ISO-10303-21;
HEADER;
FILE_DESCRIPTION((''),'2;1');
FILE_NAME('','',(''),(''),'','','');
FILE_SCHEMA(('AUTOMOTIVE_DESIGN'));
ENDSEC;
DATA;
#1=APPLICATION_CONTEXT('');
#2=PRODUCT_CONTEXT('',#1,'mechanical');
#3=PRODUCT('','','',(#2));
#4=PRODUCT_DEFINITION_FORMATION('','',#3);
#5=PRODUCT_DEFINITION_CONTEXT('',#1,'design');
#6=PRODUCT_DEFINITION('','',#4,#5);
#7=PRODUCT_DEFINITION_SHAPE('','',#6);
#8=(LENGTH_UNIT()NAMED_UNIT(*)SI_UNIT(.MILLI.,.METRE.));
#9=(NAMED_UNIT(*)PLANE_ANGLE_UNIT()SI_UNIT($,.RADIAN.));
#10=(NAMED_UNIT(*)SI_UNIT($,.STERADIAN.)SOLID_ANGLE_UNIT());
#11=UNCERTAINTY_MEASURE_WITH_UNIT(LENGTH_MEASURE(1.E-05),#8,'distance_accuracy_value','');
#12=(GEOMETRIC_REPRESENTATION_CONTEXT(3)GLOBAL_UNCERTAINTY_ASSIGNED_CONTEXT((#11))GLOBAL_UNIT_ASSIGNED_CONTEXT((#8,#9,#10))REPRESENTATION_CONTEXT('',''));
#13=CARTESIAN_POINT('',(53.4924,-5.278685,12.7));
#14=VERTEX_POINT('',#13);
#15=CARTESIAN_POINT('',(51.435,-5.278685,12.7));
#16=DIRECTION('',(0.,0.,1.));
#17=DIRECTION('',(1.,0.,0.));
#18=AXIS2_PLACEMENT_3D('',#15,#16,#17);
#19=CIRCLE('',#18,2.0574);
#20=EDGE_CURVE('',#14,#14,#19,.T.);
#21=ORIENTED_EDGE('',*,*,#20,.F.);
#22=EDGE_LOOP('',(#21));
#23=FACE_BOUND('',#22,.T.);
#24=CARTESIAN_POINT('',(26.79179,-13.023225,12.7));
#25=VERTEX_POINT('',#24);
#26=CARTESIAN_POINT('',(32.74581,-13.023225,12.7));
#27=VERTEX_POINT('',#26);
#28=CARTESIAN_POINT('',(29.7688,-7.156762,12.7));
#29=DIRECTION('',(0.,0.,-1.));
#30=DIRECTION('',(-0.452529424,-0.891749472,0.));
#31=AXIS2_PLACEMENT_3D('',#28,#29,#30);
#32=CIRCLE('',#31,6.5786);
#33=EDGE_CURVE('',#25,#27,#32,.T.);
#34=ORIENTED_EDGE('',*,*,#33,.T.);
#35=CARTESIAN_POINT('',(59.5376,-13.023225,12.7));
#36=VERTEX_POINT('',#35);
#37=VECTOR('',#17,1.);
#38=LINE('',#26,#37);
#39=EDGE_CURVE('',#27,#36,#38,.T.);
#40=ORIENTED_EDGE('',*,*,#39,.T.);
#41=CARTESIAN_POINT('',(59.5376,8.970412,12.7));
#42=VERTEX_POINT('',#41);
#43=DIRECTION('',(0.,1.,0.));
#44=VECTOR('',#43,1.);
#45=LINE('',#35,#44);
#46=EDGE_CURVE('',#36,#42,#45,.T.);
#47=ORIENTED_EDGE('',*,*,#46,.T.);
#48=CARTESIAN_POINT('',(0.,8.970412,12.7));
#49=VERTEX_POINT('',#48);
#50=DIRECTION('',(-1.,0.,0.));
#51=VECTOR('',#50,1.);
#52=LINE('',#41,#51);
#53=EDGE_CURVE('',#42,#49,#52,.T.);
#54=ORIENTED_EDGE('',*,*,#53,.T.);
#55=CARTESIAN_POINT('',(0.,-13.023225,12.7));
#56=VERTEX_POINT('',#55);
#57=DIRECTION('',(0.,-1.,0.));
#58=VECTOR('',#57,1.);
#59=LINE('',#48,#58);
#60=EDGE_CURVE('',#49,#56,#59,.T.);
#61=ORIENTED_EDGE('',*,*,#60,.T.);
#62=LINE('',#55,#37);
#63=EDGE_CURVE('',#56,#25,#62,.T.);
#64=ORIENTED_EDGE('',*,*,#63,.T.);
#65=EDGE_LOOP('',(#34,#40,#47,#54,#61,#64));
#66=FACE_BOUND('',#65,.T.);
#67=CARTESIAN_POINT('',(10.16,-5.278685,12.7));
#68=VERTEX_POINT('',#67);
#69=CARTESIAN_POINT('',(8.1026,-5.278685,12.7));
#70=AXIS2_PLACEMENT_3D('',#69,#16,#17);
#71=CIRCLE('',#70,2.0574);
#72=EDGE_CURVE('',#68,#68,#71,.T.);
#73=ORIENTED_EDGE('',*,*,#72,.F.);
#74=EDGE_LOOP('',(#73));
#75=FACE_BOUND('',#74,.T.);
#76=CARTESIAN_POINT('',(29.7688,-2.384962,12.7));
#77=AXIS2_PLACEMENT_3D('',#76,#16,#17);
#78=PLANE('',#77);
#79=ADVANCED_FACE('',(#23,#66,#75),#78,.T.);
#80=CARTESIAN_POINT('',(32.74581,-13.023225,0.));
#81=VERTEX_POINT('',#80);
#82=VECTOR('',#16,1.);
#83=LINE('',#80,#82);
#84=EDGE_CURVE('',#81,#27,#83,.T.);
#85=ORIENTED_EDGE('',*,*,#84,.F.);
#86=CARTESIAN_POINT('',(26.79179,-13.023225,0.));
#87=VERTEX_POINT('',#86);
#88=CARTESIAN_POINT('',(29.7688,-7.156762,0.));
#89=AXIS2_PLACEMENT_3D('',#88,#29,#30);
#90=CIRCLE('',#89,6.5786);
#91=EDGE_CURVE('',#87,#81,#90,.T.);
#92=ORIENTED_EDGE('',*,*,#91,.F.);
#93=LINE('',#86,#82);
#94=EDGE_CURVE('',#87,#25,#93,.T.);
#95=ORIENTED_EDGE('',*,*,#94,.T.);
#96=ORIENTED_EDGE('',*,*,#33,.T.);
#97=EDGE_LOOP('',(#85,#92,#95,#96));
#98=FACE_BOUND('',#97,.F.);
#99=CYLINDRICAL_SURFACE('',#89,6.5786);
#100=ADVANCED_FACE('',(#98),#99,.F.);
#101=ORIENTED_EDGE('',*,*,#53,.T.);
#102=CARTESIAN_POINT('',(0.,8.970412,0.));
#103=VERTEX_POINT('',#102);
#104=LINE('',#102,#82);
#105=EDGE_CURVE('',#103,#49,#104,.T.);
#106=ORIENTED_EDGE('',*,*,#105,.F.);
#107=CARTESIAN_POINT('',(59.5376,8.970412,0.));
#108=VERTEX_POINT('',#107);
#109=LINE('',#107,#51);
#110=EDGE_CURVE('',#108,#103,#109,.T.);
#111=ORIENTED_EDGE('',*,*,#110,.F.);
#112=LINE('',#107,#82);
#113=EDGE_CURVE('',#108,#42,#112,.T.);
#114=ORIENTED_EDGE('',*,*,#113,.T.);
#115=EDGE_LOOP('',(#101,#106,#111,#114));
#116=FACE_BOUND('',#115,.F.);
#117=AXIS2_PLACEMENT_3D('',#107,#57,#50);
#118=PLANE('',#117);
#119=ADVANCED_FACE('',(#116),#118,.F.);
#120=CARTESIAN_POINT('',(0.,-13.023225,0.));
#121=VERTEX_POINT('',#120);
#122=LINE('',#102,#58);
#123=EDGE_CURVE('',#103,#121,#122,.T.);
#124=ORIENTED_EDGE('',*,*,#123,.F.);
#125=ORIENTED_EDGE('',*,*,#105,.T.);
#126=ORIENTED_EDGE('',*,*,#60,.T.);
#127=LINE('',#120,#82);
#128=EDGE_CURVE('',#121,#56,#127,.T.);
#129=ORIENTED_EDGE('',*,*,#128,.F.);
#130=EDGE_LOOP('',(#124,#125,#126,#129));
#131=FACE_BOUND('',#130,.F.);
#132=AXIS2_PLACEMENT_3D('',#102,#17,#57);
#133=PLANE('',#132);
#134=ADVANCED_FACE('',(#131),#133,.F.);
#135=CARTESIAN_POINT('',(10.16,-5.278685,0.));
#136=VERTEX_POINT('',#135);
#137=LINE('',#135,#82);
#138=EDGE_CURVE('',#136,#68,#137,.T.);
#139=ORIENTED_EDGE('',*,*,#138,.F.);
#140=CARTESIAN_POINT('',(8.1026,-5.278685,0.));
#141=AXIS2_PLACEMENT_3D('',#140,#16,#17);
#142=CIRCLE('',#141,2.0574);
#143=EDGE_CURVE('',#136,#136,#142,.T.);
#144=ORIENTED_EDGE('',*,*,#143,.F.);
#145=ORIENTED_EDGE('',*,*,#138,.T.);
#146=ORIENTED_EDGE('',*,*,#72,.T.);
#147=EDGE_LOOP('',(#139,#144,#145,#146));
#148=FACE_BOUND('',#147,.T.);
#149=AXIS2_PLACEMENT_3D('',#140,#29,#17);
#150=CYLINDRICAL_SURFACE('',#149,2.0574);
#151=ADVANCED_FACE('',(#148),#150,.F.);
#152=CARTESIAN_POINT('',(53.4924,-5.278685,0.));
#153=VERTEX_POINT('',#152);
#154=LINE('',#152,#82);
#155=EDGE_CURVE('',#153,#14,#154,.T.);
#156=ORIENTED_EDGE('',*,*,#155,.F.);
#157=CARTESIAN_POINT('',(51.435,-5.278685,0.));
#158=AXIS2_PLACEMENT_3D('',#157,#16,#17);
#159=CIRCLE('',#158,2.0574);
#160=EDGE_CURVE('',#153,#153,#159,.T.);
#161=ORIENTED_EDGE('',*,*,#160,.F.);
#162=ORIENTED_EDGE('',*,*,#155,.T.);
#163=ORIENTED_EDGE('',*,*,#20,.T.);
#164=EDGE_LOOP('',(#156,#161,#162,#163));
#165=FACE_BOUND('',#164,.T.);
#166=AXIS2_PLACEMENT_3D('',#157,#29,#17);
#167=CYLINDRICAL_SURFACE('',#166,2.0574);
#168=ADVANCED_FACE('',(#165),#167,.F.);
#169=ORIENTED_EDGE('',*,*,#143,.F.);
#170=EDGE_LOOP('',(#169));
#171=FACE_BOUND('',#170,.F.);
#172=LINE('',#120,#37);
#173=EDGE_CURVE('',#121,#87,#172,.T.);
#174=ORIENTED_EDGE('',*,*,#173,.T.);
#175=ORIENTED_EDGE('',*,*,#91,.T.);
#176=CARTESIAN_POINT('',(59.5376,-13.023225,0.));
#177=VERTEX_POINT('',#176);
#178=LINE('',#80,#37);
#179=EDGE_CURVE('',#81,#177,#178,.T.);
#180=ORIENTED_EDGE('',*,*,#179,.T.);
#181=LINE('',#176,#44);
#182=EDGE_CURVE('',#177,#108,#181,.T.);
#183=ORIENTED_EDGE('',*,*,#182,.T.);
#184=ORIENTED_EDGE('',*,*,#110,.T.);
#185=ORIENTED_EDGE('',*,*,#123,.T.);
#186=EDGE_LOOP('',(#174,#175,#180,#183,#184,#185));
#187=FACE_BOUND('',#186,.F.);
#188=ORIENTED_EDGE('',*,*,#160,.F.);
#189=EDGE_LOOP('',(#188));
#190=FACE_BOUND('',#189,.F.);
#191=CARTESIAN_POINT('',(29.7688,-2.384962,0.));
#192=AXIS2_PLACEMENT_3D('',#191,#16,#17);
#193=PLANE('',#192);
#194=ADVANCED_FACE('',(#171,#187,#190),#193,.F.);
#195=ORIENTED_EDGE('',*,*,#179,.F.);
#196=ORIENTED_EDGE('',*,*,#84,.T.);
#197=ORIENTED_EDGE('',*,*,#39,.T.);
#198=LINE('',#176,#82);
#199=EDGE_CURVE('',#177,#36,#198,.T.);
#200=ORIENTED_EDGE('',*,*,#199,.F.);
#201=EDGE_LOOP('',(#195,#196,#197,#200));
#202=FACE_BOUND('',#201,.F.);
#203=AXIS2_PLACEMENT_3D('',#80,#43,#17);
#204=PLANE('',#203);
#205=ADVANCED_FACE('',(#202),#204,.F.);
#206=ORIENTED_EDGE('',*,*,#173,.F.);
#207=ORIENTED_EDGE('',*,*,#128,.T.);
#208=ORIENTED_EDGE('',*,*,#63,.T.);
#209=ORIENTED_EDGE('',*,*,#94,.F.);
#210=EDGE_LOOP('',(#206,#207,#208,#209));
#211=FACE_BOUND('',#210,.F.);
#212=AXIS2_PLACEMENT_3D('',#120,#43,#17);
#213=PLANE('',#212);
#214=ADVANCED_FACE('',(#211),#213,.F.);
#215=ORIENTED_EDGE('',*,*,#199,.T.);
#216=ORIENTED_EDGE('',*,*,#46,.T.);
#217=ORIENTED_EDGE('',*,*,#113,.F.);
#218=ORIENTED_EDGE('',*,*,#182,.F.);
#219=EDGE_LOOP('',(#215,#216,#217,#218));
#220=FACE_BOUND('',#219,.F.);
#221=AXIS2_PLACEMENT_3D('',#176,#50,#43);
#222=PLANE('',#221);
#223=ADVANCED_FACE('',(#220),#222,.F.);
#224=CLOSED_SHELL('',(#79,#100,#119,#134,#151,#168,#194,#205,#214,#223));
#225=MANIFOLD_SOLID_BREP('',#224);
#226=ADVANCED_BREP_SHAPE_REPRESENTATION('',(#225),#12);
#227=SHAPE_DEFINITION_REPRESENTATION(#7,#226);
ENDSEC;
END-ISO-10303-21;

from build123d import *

# Parameters (mm, degrees)
F0_R     = 2.0574
F1_DEPTH = 12.7


# Not quite as in the source:
# - a feature names something its author has since deleted; it is built from what else it names


with BuildPart() as f1:
    # F0 (on Top) → F1 (new body)
    with BuildSketch(Plane.XY):
        with BuildLine():
            Line((0, 8.9704120984), (0, -13.0232248562))
            Line((0, -13.0232248562), (26.7917899333, -13.0232248562))
            ThreePointArc((26.7917899333, -13.0232248562), (29.7688, -0.5781617802), (32.7458100667, -13.0232248562))
            Line((32.7458100667, -13.0232248562), (59.5376, -13.0232248562))
            Line((59.5376, -13.0232248562), (59.5376, 8.9704120984))
            Line((59.5376, 8.9704120984), (0, 8.9704120984))
        make_face()
        with Locations((8.1026, -5.2786845261)):
            Circle(F0_R, mode=Mode.SUBTRACT)
        with Locations((51.435, -5.2786845261)):
            Circle(F0_R, mode=Mode.SUBTRACT)
    extrude(amount=F1_DEPTH)


solid = f1.part
